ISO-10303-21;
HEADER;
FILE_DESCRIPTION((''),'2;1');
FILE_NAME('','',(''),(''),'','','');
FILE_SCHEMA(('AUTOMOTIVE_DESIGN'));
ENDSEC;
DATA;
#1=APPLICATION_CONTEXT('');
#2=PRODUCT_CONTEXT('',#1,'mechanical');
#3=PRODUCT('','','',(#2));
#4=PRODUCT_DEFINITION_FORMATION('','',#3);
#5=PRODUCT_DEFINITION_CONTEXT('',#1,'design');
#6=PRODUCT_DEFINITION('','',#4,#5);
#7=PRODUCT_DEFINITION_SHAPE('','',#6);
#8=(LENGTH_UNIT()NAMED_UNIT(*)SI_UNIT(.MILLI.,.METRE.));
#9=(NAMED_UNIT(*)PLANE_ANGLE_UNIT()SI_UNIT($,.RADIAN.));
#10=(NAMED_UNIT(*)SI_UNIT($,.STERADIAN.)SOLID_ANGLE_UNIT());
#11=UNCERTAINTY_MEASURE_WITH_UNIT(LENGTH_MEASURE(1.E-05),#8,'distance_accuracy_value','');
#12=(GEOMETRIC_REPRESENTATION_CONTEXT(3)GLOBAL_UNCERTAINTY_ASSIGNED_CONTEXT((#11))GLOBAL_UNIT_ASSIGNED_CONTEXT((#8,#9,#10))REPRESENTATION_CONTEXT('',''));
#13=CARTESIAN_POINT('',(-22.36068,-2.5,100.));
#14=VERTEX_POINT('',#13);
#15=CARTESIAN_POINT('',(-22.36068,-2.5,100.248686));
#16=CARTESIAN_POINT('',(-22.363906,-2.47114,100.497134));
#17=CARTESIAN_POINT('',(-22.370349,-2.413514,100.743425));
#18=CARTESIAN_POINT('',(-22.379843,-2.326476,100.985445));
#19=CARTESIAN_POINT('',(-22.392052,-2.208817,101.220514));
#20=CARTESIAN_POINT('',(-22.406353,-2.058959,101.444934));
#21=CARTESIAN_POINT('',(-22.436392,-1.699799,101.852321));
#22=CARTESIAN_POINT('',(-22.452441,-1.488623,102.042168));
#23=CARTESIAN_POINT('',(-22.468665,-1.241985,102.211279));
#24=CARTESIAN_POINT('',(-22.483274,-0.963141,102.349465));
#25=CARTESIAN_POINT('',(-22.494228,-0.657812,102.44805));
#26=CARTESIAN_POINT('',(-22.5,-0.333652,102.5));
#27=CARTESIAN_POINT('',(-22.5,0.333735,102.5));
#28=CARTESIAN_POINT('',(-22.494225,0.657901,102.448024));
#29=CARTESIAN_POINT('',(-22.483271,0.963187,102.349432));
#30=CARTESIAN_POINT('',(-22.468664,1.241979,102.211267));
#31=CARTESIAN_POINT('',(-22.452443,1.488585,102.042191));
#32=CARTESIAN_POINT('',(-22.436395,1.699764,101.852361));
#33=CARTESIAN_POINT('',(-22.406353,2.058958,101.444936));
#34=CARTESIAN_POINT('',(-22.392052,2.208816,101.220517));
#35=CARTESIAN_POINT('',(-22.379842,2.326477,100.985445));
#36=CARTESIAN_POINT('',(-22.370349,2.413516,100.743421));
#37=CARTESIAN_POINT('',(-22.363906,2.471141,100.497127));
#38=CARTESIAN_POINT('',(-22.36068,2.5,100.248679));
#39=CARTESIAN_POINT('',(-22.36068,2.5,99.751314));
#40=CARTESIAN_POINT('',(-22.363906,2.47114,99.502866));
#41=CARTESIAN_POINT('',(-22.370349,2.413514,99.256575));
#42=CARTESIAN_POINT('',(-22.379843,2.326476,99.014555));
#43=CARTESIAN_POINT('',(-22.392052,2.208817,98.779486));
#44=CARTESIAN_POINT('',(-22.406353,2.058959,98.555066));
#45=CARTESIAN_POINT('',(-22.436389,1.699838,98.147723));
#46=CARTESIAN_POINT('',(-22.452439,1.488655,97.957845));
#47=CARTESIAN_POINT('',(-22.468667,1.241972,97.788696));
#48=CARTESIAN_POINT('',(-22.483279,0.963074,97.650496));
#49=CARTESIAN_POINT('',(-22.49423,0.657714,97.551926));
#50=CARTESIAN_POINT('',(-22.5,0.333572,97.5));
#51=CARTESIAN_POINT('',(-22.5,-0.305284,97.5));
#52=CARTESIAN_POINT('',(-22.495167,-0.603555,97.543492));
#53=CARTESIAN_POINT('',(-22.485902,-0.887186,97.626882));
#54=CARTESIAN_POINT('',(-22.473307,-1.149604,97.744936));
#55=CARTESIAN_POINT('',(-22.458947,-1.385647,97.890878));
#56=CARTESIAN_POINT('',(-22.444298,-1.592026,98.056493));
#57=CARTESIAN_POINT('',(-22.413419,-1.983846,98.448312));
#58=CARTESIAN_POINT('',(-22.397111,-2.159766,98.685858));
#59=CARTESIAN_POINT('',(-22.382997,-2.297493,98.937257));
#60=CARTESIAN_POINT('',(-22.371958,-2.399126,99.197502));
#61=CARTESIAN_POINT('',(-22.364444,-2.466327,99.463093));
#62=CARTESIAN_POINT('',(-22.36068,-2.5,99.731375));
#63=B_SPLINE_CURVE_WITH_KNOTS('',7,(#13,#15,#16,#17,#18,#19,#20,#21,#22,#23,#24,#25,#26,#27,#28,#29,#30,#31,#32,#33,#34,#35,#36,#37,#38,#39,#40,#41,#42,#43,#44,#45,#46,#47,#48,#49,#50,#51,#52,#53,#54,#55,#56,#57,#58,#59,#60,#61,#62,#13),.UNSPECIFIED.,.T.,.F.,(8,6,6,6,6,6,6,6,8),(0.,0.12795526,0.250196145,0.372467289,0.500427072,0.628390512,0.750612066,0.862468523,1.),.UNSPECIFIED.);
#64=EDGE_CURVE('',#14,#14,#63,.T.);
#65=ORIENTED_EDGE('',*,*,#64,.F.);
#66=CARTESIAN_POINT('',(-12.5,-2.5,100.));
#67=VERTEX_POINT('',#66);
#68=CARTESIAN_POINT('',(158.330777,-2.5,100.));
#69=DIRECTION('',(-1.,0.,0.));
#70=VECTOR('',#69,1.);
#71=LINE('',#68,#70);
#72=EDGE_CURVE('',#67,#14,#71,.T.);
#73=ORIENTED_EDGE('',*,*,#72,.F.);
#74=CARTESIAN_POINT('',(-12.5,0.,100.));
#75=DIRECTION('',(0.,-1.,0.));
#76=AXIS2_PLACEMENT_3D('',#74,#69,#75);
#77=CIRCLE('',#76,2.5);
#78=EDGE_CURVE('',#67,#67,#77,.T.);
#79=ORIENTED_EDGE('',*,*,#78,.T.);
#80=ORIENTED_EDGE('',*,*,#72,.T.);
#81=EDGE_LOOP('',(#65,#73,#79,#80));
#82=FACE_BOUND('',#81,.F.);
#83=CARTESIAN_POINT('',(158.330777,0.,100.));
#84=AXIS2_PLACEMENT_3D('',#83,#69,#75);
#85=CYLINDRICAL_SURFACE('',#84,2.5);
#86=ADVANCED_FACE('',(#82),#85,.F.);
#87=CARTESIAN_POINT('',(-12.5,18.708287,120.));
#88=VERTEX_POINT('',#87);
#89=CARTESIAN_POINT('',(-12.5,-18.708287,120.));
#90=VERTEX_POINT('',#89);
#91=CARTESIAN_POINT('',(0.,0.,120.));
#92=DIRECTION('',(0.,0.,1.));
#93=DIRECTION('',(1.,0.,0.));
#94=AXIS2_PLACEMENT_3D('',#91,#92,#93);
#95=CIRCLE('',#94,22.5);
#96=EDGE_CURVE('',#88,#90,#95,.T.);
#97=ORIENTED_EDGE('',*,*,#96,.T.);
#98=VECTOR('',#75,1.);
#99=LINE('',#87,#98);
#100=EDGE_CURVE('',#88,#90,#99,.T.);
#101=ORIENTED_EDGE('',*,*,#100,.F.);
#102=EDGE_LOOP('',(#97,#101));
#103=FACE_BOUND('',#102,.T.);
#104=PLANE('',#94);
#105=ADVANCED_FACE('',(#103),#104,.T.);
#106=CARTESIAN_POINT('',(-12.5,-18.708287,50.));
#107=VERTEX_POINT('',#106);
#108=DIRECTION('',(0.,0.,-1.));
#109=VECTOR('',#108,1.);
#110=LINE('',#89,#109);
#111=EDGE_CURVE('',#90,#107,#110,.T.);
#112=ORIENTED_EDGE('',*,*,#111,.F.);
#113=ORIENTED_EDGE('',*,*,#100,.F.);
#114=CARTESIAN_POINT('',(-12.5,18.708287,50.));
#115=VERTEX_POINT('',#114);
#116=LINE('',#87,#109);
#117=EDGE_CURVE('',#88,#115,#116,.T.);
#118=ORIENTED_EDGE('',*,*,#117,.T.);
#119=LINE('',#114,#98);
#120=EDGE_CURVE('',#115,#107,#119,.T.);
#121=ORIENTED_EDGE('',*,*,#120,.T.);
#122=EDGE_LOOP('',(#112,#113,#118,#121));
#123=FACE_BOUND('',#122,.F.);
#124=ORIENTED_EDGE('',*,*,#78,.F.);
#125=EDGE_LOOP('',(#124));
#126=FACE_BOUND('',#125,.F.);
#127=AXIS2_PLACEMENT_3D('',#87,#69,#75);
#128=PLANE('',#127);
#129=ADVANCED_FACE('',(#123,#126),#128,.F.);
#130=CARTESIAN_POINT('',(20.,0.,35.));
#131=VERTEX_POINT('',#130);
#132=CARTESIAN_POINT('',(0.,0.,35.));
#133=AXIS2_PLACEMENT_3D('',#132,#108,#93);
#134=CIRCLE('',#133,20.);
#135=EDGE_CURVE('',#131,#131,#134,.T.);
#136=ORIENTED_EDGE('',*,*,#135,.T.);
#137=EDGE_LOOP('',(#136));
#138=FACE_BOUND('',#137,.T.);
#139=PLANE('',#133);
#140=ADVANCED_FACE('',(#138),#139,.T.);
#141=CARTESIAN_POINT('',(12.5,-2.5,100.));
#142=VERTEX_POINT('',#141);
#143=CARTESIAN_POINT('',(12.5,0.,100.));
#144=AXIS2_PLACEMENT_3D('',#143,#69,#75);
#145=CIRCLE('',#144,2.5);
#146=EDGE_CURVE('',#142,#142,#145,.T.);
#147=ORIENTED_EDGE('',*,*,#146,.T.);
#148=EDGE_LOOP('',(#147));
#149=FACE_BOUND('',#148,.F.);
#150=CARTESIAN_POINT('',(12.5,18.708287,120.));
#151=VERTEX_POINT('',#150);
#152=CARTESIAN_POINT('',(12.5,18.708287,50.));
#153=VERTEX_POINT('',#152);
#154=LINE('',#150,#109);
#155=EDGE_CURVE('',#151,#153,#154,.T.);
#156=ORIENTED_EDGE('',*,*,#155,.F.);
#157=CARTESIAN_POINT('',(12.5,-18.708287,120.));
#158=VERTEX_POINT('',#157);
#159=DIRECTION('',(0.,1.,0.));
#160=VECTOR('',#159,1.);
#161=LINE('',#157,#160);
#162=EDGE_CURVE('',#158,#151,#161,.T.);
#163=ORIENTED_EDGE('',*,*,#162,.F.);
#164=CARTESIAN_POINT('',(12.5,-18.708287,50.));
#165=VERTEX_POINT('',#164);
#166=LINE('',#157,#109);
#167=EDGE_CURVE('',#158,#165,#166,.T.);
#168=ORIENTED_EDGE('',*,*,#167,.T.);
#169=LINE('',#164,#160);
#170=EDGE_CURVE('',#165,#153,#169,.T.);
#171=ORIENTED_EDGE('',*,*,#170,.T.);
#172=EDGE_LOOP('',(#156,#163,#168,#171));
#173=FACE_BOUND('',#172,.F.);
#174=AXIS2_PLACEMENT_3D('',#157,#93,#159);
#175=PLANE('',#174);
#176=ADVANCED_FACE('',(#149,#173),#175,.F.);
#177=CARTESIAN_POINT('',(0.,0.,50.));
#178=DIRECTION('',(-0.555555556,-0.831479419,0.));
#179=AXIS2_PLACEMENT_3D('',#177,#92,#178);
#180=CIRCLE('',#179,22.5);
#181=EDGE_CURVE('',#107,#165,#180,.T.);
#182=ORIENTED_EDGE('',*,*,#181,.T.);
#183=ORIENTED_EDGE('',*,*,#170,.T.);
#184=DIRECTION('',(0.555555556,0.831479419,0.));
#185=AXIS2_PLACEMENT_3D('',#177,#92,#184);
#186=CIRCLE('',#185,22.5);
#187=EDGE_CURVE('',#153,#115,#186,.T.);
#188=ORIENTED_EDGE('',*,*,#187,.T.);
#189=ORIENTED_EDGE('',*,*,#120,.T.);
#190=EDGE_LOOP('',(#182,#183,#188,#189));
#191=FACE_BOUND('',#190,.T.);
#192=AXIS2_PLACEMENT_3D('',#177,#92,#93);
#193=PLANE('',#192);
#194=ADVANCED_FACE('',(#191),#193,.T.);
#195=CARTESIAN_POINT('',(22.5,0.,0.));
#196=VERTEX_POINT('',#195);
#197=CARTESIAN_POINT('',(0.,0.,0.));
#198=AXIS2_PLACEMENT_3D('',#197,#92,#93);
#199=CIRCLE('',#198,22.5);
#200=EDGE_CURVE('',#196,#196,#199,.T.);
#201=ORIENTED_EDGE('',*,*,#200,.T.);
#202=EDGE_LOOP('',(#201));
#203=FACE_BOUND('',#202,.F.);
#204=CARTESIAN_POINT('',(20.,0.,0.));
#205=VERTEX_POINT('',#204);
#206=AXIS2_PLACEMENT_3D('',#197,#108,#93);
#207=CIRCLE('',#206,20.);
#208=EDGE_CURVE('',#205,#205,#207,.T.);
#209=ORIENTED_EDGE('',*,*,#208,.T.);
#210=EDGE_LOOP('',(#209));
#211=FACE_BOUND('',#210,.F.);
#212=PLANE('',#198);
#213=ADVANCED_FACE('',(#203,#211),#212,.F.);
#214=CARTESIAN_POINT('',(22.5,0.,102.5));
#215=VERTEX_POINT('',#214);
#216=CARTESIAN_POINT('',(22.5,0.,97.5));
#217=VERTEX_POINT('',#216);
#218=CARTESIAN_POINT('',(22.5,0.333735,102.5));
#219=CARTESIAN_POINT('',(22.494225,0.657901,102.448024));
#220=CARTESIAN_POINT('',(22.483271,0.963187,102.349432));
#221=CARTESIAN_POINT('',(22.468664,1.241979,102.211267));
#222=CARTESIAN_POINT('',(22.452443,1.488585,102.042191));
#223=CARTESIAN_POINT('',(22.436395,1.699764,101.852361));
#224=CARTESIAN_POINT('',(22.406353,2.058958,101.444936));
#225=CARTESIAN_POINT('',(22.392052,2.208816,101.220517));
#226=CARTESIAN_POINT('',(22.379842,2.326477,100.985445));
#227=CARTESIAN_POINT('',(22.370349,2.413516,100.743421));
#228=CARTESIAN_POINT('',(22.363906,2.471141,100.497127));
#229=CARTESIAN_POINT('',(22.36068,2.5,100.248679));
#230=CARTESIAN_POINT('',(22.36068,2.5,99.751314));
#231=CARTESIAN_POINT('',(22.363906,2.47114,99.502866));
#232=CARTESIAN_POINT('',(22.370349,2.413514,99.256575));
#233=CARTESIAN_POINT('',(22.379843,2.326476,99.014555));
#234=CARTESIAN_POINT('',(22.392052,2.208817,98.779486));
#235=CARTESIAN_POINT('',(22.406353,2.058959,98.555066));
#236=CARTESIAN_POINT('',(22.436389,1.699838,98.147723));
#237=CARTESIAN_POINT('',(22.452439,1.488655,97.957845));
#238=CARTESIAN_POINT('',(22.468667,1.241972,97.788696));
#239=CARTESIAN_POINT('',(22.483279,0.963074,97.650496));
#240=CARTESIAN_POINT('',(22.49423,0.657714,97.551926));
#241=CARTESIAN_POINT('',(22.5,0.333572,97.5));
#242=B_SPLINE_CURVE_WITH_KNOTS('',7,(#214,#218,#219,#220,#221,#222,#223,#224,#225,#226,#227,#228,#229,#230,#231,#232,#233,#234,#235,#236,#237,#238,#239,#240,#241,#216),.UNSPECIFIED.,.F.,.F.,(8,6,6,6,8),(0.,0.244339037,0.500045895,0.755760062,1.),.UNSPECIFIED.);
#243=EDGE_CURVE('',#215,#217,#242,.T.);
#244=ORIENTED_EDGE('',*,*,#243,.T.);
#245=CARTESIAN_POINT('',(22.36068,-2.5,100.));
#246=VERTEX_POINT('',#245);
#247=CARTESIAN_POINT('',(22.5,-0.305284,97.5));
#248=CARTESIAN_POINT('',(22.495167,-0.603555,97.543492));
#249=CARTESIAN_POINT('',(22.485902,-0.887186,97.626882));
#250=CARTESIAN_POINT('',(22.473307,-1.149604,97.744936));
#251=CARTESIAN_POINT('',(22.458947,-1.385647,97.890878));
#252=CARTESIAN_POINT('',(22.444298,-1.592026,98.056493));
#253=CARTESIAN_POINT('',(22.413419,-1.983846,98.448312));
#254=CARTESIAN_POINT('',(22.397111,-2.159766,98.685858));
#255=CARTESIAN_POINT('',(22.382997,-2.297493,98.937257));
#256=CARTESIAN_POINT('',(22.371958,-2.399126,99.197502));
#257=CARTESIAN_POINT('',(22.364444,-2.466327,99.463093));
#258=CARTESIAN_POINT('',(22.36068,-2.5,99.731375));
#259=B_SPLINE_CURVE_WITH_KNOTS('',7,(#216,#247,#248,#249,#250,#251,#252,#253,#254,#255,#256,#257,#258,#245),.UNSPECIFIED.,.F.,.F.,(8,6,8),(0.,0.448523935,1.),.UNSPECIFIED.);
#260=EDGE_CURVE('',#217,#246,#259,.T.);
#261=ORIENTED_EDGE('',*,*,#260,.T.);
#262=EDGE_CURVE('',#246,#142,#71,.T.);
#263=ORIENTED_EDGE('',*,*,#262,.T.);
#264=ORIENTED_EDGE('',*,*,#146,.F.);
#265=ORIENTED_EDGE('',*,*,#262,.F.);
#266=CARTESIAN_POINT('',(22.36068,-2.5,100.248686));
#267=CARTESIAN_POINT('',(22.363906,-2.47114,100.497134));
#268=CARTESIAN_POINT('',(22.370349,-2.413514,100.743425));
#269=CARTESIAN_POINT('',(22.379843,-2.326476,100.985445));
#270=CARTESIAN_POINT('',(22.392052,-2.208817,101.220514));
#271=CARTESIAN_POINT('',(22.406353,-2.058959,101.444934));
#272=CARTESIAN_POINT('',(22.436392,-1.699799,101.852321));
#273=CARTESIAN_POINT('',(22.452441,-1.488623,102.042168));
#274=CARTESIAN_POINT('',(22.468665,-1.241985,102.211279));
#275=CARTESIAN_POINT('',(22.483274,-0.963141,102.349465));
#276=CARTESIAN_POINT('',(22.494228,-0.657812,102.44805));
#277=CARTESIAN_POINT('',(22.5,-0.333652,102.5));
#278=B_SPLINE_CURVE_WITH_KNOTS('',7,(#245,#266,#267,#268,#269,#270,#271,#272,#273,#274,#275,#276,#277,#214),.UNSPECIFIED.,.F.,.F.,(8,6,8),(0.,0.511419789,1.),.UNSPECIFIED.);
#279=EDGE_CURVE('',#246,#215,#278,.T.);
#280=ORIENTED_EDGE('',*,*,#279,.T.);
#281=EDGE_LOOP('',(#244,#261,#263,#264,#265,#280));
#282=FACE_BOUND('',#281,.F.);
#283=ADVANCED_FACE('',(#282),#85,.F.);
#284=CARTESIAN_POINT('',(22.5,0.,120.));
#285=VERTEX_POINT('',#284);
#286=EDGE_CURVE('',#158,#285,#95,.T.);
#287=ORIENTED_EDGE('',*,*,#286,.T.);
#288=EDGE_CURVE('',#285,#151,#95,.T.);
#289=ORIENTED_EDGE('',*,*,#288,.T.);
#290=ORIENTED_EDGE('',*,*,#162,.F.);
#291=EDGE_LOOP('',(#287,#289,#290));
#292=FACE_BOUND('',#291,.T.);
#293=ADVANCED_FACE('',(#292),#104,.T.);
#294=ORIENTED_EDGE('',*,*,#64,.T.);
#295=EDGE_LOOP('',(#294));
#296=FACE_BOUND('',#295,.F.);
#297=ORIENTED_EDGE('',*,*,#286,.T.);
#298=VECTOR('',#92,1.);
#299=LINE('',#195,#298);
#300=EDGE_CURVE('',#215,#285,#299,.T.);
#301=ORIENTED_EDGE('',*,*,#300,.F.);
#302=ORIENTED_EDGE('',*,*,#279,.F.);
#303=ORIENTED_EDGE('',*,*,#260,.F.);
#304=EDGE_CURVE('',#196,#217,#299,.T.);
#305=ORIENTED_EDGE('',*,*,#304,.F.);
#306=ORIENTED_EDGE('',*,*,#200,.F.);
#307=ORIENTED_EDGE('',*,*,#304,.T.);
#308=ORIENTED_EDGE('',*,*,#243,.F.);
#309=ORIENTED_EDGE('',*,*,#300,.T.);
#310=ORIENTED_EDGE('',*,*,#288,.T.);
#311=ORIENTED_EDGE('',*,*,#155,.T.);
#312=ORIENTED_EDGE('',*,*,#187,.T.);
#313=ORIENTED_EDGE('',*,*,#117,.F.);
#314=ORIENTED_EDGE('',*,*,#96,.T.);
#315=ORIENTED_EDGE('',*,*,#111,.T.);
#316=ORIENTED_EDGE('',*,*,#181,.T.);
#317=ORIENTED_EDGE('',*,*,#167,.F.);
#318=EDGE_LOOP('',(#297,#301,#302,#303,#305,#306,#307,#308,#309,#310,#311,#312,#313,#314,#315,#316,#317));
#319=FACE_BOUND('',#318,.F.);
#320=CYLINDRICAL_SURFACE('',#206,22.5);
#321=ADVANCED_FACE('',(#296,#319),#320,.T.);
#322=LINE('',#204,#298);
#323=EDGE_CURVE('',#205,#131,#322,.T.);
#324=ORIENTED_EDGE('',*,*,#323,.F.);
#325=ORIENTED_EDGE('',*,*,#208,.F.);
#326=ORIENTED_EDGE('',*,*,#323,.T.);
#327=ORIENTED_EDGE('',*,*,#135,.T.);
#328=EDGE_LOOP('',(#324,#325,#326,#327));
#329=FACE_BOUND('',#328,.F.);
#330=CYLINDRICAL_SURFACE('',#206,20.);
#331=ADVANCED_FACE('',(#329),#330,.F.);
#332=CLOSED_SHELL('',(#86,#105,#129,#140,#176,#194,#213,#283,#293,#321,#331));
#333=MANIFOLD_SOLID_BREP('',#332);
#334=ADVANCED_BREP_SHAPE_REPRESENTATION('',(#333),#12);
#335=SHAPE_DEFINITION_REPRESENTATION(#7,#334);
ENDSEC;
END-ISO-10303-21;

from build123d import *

# Parameters (mm, degrees)
F0_R     = 22.5
F1_DEPTH = 120
F3_DEPTH = 70
F4_R     = 20
F5_DEPTH = 35
F8_D     = 5


# Not quite as in the source:
# - a feature names something its author has since deleted; it is built from what else it names


with BuildPart() as f1:
    # F0 (on Top) → F1 (new body)
    with BuildSketch(Plane.XY):
        Circle(F0_R)
    extrude(amount=F1_DEPTH)

    # F2 (on face) → F3 (cut)
    with BuildSketch(Plane.XY.offset(120)):
        with BuildLine():
            ThreePointArc((12.5, 18.7082869339), (0, 22.5), (-12.5, 18.7082869339))
            Line((-12.5, 18.7082869339), (-12.5, -18.7082869339))
            ThreePointArc((-12.5, -18.7082869339), (0, -22.5), (12.5, -18.7082869339))
            Line((12.5, -18.7082869339), (12.5, 18.7082869339))
        make_face()
    extrude(amount=-F3_DEPTH, mode=Mode.SUBTRACT)

    # F4 (on face) → F5 (cut)
    with BuildSketch(Plane(origin=(0, 0, 0), x_dir=(1, 0, 0), z_dir=(0, 0, -1))):
        Circle(F4_R)
    extrude(amount=-F5_DEPTH, mode=Mode.SUBTRACT)

    # F8 (through all)
    with Locations(Plane.YZ.offset(22.5)):
        with Locations((0, 100)):
            Hole(F8_D / 2)


solid = f1.part
